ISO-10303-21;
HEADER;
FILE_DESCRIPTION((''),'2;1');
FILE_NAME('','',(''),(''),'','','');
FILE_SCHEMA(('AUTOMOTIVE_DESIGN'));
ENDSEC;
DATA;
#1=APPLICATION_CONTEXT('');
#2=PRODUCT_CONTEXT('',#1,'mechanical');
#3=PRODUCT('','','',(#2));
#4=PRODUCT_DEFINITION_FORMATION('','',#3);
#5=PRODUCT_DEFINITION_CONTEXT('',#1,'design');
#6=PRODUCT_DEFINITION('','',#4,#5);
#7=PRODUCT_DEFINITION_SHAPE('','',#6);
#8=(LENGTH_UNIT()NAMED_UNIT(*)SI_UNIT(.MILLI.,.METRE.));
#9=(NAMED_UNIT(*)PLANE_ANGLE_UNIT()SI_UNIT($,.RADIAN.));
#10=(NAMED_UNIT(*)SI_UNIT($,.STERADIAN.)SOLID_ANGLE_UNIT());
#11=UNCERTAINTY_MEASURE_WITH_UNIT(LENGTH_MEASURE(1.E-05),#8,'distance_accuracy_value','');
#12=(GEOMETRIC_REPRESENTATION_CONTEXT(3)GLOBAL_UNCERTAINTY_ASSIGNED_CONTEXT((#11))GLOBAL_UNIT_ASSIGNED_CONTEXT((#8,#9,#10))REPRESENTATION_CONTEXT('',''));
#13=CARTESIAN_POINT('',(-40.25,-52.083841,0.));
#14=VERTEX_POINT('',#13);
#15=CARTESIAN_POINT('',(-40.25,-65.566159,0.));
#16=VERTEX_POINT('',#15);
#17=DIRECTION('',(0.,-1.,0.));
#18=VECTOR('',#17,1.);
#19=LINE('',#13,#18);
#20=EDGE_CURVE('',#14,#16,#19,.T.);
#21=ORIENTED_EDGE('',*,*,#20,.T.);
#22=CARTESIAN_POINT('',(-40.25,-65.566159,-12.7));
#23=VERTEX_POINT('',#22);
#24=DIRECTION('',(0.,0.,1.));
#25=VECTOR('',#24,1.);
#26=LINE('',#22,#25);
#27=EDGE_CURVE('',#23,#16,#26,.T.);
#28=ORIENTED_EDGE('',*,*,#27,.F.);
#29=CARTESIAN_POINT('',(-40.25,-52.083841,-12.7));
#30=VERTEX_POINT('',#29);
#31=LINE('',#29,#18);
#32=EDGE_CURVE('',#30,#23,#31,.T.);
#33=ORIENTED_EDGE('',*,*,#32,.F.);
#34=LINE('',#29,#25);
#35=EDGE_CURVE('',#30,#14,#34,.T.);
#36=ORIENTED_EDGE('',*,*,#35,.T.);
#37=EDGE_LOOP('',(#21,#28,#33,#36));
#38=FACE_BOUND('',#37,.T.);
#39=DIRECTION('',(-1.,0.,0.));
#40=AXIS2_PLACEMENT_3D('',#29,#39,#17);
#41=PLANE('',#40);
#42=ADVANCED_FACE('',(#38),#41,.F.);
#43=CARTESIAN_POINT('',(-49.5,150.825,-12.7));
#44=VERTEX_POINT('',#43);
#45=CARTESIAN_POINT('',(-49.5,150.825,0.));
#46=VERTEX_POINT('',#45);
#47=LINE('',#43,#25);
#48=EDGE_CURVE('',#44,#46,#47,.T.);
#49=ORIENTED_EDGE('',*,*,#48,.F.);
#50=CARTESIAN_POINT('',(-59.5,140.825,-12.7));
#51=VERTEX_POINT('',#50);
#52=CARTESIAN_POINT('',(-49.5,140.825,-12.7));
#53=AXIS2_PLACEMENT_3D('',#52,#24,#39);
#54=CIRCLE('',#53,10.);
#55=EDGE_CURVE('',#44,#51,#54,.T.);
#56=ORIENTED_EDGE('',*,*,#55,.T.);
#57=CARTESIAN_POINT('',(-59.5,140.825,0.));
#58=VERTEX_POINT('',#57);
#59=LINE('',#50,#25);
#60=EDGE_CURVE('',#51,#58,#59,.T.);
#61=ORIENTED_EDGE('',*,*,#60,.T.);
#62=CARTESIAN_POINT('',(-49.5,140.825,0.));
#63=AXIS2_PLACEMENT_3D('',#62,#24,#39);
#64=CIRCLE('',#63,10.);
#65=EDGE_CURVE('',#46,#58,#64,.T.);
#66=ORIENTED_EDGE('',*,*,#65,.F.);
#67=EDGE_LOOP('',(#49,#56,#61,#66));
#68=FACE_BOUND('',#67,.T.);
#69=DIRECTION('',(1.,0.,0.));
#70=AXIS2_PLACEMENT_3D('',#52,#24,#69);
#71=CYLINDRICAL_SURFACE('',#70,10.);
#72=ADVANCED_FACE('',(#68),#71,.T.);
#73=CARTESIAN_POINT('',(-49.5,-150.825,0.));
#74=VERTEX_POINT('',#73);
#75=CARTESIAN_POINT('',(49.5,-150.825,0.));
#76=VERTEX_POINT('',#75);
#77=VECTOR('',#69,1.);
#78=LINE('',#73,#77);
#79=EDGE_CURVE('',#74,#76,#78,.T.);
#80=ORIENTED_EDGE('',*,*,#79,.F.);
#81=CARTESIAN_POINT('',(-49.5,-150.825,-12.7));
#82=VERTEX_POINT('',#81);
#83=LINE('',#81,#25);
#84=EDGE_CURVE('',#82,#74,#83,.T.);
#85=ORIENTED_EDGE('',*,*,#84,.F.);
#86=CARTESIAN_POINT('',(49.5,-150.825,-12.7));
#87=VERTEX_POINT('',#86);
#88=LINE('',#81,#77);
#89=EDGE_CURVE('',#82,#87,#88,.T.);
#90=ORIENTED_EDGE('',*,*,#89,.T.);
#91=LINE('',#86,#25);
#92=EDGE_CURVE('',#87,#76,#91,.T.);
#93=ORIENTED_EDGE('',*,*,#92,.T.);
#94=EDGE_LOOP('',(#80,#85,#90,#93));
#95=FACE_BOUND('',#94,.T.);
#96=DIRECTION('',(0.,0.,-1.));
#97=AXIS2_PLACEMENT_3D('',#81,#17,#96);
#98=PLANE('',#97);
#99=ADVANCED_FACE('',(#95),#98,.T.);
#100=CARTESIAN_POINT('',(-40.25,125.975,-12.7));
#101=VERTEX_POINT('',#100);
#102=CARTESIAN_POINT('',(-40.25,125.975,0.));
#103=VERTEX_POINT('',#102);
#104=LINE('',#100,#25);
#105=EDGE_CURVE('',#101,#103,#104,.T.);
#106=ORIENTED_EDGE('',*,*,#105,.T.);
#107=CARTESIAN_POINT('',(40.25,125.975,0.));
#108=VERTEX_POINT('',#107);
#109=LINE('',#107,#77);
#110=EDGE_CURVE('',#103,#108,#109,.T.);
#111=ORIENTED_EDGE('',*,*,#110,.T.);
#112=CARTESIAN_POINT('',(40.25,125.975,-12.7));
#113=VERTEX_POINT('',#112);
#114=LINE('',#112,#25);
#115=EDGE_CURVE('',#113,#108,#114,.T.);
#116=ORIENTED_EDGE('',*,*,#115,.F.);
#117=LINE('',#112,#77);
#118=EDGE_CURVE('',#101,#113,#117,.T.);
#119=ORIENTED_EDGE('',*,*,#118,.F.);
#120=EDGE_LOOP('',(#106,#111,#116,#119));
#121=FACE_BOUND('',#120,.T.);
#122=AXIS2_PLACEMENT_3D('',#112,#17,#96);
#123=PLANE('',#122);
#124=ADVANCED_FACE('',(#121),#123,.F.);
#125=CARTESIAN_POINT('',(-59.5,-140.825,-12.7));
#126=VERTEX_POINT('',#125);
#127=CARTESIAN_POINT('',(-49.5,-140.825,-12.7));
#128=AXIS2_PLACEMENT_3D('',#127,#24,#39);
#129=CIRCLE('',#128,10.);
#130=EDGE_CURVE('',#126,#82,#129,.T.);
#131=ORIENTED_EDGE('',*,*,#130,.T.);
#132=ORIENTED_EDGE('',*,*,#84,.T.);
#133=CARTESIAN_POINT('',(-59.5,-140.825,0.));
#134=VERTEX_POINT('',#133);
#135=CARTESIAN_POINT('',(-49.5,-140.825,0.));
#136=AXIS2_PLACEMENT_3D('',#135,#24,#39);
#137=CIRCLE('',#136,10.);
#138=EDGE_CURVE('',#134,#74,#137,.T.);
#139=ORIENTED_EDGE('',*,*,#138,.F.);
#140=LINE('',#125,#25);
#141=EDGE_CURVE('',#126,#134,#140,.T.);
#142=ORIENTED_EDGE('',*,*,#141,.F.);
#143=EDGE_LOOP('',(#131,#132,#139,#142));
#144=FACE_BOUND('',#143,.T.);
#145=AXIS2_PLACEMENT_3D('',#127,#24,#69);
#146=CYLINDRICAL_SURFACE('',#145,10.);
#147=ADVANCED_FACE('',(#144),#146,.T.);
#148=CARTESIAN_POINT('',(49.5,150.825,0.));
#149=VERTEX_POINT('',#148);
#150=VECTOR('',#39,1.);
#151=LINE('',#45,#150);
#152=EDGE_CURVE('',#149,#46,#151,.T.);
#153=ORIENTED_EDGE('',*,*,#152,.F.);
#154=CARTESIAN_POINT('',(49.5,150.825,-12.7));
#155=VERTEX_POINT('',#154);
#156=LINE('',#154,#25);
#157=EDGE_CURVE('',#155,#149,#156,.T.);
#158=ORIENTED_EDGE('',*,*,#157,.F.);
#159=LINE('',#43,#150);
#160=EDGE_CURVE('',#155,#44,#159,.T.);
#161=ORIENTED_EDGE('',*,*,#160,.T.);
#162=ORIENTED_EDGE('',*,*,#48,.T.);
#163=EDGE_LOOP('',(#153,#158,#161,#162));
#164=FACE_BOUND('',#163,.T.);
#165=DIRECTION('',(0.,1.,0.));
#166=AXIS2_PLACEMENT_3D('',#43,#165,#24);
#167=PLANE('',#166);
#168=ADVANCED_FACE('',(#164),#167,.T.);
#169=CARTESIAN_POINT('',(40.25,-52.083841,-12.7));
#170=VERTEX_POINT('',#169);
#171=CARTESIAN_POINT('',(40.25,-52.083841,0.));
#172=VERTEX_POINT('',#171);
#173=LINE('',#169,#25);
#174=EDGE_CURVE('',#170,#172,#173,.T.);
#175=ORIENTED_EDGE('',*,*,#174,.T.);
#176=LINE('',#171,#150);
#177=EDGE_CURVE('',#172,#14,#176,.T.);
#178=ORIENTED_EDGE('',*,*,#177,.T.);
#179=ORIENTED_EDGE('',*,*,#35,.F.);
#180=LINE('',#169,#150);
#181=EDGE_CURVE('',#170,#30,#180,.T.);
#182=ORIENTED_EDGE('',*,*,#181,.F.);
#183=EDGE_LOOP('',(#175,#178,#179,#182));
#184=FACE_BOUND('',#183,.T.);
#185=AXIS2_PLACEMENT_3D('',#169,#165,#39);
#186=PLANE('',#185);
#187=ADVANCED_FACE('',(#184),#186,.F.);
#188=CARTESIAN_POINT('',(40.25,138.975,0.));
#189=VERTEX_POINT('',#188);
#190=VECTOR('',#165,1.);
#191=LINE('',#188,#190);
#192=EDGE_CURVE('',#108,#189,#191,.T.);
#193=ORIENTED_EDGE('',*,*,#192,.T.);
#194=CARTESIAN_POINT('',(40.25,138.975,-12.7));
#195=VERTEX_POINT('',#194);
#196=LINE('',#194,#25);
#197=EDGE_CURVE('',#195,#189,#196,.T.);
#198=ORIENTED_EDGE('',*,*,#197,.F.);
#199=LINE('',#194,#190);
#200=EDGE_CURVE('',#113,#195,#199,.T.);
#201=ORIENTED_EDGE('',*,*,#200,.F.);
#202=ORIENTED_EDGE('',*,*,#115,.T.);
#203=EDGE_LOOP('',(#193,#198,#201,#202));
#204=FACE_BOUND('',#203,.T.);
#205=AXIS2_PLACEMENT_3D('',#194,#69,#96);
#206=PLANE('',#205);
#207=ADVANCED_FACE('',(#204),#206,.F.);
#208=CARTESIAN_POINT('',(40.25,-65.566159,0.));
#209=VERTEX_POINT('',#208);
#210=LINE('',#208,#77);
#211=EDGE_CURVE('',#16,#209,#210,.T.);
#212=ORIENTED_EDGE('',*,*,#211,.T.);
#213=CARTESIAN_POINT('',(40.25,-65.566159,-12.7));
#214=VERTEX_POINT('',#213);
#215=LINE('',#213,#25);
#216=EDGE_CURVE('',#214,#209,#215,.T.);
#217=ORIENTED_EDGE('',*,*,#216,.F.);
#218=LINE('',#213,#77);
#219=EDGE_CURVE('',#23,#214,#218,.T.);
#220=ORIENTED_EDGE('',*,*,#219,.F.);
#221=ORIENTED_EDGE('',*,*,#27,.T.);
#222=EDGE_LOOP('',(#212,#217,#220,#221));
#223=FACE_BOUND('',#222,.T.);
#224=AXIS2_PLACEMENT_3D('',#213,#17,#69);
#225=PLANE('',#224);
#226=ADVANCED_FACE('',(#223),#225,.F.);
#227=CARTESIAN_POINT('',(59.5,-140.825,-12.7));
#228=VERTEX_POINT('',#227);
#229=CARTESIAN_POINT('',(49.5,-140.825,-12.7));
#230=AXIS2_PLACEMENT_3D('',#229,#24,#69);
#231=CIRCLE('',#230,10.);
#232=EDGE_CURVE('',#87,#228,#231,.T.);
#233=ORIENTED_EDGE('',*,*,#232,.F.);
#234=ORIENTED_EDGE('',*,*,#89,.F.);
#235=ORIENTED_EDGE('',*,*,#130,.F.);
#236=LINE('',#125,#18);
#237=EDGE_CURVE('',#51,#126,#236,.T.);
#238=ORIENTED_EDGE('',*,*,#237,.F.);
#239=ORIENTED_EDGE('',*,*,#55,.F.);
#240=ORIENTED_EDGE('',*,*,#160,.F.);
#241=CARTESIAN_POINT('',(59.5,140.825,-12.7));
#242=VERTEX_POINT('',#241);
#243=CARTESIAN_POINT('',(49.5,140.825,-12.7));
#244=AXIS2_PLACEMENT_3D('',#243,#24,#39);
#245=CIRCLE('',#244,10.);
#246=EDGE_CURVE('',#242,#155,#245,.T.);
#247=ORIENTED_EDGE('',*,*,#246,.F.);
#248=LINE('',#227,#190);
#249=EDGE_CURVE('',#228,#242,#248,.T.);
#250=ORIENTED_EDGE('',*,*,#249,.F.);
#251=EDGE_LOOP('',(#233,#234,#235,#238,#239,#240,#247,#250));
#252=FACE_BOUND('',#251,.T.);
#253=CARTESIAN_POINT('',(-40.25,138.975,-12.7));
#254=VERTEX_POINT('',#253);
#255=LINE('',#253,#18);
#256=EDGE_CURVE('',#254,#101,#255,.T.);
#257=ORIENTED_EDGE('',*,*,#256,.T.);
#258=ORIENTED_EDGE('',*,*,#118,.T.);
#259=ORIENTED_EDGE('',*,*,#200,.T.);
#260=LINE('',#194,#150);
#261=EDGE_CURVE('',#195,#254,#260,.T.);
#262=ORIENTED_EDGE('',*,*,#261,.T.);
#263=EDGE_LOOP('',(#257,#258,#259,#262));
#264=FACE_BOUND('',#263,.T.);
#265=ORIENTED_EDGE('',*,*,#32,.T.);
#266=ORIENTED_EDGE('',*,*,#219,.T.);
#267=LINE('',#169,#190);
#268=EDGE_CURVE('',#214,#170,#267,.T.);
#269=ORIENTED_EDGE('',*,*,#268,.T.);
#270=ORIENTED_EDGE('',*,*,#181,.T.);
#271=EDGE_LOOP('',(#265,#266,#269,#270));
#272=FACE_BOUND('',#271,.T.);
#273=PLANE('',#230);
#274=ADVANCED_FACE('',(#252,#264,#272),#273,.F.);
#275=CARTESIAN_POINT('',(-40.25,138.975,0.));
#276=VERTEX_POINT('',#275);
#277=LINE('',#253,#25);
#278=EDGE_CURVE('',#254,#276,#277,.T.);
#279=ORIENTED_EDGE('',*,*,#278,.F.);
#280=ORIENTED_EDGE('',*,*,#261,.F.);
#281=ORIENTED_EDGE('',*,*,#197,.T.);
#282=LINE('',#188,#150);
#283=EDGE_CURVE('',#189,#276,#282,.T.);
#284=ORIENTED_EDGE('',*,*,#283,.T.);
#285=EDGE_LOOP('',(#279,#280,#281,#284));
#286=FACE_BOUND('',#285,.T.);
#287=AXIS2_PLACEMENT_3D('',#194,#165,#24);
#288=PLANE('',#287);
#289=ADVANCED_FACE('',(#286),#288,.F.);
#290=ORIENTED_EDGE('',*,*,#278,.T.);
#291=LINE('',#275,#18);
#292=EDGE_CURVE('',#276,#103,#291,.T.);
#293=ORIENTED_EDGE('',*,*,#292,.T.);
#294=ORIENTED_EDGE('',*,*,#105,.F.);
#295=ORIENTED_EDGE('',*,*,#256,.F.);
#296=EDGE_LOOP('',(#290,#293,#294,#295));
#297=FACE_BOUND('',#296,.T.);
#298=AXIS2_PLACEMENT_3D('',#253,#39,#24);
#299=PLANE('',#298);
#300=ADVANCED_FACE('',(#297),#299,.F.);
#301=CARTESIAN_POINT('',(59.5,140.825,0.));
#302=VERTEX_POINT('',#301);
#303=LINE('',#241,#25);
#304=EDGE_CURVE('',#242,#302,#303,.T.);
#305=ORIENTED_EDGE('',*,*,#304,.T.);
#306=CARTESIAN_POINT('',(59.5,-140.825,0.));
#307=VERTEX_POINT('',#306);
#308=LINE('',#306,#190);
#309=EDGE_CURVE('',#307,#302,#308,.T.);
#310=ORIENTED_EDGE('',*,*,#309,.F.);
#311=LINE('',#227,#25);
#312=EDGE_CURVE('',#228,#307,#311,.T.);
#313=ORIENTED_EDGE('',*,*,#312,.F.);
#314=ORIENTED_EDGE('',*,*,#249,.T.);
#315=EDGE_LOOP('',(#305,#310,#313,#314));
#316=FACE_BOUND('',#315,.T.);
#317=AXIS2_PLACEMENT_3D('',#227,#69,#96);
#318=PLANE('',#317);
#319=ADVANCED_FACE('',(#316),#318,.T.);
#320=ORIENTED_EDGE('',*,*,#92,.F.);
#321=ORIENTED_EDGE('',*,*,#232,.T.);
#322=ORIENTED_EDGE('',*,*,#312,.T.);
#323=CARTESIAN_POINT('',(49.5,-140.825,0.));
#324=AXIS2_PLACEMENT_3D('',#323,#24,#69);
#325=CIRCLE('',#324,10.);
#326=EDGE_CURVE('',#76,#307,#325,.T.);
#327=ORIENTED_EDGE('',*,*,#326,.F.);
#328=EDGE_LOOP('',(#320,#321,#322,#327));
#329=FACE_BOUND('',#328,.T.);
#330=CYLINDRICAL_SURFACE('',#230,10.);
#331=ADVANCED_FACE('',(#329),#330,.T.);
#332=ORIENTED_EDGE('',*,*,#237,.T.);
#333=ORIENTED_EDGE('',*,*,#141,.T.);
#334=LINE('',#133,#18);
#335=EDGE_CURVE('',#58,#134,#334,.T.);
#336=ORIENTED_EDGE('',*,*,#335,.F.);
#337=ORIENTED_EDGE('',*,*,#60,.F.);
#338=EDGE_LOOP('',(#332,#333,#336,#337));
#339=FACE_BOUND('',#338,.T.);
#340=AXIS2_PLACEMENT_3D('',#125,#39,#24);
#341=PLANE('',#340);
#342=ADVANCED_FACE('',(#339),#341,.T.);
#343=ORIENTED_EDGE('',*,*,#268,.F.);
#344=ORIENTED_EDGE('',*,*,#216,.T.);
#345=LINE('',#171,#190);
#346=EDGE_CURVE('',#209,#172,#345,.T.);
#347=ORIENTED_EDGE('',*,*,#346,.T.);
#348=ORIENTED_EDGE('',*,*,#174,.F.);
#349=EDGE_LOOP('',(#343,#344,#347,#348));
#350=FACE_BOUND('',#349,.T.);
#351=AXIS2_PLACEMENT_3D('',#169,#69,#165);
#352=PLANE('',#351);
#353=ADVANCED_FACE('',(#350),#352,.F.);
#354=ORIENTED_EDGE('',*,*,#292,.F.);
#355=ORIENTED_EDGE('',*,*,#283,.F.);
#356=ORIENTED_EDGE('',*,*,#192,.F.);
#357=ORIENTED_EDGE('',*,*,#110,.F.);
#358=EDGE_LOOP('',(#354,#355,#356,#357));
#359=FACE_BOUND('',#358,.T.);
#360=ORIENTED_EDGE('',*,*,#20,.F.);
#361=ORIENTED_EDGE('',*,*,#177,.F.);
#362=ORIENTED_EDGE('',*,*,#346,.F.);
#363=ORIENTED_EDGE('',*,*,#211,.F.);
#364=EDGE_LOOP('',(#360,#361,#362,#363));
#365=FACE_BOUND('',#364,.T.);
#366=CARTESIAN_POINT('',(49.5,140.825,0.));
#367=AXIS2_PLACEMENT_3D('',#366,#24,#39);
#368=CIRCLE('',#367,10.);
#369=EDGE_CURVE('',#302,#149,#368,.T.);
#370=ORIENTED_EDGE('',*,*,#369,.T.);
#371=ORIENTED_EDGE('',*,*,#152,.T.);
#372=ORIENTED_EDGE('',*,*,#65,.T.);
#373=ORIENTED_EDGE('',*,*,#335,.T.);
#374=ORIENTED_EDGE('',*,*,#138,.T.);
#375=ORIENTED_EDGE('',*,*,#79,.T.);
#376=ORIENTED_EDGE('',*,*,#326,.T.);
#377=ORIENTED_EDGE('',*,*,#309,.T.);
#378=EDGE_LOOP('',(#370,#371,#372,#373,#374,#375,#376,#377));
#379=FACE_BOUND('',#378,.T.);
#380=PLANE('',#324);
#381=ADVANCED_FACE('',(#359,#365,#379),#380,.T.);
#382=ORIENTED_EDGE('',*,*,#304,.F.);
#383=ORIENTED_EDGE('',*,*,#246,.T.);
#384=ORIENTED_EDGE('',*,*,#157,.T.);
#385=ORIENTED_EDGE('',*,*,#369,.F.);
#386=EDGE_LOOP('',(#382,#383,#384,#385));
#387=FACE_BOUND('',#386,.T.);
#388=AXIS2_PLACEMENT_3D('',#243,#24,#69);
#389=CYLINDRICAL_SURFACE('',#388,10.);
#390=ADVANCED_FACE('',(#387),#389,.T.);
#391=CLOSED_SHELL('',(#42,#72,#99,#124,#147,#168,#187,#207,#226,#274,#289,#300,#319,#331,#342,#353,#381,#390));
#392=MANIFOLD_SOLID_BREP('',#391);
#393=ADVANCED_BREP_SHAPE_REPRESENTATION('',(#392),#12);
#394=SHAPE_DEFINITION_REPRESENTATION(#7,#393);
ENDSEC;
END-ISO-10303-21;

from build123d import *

# Parameters (mm, degrees)
ESBO_O1_W          = 80.5
ESBO_O1_H          = 13
ESBO_O1_H_2        = 13.482318276
FLANGE_BASE1_DEPTH = 12.7


# Sheet-metal steps are written as plain solids
with BuildPart() as part:
    # Esboço1 → Flange-base1 (new body)
    with BuildSketch(Plane.XY):
        with BuildLine():
            Line((-49.5, -150.825), (49.5, -150.825))
            ThreePointArc((49.5, -150.825), (56.571067812, -147.896067812), (59.5, -140.825))
            Line((59.5, -140.825), (59.5, 140.825))
            ThreePointArc((59.5, 140.825), (56.571067812, 147.896067812), (49.5, 150.825))
            Line((49.5, 150.825), (-49.5, 150.825))
            ThreePointArc((-49.5, 150.825), (-56.571067812, 147.896067812), (-59.5, 140.825))
            Line((-59.5, 140.825), (-59.5, -140.825))
            ThreePointArc((-59.5, -140.825), (-56.571067812, -147.896067812), (-49.5, -150.825))
        make_face()
        with Locations((0, 132.475)):
            Rectangle(ESBO_O1_W, ESBO_O1_H, mode=Mode.SUBTRACT)
        with Locations((0, -58.825)):
            Rectangle(ESBO_O1_W, ESBO_O1_H_2, mode=Mode.SUBTRACT)
    extrude(amount=-FLANGE_BASE1_DEPTH)


solid = part.part
